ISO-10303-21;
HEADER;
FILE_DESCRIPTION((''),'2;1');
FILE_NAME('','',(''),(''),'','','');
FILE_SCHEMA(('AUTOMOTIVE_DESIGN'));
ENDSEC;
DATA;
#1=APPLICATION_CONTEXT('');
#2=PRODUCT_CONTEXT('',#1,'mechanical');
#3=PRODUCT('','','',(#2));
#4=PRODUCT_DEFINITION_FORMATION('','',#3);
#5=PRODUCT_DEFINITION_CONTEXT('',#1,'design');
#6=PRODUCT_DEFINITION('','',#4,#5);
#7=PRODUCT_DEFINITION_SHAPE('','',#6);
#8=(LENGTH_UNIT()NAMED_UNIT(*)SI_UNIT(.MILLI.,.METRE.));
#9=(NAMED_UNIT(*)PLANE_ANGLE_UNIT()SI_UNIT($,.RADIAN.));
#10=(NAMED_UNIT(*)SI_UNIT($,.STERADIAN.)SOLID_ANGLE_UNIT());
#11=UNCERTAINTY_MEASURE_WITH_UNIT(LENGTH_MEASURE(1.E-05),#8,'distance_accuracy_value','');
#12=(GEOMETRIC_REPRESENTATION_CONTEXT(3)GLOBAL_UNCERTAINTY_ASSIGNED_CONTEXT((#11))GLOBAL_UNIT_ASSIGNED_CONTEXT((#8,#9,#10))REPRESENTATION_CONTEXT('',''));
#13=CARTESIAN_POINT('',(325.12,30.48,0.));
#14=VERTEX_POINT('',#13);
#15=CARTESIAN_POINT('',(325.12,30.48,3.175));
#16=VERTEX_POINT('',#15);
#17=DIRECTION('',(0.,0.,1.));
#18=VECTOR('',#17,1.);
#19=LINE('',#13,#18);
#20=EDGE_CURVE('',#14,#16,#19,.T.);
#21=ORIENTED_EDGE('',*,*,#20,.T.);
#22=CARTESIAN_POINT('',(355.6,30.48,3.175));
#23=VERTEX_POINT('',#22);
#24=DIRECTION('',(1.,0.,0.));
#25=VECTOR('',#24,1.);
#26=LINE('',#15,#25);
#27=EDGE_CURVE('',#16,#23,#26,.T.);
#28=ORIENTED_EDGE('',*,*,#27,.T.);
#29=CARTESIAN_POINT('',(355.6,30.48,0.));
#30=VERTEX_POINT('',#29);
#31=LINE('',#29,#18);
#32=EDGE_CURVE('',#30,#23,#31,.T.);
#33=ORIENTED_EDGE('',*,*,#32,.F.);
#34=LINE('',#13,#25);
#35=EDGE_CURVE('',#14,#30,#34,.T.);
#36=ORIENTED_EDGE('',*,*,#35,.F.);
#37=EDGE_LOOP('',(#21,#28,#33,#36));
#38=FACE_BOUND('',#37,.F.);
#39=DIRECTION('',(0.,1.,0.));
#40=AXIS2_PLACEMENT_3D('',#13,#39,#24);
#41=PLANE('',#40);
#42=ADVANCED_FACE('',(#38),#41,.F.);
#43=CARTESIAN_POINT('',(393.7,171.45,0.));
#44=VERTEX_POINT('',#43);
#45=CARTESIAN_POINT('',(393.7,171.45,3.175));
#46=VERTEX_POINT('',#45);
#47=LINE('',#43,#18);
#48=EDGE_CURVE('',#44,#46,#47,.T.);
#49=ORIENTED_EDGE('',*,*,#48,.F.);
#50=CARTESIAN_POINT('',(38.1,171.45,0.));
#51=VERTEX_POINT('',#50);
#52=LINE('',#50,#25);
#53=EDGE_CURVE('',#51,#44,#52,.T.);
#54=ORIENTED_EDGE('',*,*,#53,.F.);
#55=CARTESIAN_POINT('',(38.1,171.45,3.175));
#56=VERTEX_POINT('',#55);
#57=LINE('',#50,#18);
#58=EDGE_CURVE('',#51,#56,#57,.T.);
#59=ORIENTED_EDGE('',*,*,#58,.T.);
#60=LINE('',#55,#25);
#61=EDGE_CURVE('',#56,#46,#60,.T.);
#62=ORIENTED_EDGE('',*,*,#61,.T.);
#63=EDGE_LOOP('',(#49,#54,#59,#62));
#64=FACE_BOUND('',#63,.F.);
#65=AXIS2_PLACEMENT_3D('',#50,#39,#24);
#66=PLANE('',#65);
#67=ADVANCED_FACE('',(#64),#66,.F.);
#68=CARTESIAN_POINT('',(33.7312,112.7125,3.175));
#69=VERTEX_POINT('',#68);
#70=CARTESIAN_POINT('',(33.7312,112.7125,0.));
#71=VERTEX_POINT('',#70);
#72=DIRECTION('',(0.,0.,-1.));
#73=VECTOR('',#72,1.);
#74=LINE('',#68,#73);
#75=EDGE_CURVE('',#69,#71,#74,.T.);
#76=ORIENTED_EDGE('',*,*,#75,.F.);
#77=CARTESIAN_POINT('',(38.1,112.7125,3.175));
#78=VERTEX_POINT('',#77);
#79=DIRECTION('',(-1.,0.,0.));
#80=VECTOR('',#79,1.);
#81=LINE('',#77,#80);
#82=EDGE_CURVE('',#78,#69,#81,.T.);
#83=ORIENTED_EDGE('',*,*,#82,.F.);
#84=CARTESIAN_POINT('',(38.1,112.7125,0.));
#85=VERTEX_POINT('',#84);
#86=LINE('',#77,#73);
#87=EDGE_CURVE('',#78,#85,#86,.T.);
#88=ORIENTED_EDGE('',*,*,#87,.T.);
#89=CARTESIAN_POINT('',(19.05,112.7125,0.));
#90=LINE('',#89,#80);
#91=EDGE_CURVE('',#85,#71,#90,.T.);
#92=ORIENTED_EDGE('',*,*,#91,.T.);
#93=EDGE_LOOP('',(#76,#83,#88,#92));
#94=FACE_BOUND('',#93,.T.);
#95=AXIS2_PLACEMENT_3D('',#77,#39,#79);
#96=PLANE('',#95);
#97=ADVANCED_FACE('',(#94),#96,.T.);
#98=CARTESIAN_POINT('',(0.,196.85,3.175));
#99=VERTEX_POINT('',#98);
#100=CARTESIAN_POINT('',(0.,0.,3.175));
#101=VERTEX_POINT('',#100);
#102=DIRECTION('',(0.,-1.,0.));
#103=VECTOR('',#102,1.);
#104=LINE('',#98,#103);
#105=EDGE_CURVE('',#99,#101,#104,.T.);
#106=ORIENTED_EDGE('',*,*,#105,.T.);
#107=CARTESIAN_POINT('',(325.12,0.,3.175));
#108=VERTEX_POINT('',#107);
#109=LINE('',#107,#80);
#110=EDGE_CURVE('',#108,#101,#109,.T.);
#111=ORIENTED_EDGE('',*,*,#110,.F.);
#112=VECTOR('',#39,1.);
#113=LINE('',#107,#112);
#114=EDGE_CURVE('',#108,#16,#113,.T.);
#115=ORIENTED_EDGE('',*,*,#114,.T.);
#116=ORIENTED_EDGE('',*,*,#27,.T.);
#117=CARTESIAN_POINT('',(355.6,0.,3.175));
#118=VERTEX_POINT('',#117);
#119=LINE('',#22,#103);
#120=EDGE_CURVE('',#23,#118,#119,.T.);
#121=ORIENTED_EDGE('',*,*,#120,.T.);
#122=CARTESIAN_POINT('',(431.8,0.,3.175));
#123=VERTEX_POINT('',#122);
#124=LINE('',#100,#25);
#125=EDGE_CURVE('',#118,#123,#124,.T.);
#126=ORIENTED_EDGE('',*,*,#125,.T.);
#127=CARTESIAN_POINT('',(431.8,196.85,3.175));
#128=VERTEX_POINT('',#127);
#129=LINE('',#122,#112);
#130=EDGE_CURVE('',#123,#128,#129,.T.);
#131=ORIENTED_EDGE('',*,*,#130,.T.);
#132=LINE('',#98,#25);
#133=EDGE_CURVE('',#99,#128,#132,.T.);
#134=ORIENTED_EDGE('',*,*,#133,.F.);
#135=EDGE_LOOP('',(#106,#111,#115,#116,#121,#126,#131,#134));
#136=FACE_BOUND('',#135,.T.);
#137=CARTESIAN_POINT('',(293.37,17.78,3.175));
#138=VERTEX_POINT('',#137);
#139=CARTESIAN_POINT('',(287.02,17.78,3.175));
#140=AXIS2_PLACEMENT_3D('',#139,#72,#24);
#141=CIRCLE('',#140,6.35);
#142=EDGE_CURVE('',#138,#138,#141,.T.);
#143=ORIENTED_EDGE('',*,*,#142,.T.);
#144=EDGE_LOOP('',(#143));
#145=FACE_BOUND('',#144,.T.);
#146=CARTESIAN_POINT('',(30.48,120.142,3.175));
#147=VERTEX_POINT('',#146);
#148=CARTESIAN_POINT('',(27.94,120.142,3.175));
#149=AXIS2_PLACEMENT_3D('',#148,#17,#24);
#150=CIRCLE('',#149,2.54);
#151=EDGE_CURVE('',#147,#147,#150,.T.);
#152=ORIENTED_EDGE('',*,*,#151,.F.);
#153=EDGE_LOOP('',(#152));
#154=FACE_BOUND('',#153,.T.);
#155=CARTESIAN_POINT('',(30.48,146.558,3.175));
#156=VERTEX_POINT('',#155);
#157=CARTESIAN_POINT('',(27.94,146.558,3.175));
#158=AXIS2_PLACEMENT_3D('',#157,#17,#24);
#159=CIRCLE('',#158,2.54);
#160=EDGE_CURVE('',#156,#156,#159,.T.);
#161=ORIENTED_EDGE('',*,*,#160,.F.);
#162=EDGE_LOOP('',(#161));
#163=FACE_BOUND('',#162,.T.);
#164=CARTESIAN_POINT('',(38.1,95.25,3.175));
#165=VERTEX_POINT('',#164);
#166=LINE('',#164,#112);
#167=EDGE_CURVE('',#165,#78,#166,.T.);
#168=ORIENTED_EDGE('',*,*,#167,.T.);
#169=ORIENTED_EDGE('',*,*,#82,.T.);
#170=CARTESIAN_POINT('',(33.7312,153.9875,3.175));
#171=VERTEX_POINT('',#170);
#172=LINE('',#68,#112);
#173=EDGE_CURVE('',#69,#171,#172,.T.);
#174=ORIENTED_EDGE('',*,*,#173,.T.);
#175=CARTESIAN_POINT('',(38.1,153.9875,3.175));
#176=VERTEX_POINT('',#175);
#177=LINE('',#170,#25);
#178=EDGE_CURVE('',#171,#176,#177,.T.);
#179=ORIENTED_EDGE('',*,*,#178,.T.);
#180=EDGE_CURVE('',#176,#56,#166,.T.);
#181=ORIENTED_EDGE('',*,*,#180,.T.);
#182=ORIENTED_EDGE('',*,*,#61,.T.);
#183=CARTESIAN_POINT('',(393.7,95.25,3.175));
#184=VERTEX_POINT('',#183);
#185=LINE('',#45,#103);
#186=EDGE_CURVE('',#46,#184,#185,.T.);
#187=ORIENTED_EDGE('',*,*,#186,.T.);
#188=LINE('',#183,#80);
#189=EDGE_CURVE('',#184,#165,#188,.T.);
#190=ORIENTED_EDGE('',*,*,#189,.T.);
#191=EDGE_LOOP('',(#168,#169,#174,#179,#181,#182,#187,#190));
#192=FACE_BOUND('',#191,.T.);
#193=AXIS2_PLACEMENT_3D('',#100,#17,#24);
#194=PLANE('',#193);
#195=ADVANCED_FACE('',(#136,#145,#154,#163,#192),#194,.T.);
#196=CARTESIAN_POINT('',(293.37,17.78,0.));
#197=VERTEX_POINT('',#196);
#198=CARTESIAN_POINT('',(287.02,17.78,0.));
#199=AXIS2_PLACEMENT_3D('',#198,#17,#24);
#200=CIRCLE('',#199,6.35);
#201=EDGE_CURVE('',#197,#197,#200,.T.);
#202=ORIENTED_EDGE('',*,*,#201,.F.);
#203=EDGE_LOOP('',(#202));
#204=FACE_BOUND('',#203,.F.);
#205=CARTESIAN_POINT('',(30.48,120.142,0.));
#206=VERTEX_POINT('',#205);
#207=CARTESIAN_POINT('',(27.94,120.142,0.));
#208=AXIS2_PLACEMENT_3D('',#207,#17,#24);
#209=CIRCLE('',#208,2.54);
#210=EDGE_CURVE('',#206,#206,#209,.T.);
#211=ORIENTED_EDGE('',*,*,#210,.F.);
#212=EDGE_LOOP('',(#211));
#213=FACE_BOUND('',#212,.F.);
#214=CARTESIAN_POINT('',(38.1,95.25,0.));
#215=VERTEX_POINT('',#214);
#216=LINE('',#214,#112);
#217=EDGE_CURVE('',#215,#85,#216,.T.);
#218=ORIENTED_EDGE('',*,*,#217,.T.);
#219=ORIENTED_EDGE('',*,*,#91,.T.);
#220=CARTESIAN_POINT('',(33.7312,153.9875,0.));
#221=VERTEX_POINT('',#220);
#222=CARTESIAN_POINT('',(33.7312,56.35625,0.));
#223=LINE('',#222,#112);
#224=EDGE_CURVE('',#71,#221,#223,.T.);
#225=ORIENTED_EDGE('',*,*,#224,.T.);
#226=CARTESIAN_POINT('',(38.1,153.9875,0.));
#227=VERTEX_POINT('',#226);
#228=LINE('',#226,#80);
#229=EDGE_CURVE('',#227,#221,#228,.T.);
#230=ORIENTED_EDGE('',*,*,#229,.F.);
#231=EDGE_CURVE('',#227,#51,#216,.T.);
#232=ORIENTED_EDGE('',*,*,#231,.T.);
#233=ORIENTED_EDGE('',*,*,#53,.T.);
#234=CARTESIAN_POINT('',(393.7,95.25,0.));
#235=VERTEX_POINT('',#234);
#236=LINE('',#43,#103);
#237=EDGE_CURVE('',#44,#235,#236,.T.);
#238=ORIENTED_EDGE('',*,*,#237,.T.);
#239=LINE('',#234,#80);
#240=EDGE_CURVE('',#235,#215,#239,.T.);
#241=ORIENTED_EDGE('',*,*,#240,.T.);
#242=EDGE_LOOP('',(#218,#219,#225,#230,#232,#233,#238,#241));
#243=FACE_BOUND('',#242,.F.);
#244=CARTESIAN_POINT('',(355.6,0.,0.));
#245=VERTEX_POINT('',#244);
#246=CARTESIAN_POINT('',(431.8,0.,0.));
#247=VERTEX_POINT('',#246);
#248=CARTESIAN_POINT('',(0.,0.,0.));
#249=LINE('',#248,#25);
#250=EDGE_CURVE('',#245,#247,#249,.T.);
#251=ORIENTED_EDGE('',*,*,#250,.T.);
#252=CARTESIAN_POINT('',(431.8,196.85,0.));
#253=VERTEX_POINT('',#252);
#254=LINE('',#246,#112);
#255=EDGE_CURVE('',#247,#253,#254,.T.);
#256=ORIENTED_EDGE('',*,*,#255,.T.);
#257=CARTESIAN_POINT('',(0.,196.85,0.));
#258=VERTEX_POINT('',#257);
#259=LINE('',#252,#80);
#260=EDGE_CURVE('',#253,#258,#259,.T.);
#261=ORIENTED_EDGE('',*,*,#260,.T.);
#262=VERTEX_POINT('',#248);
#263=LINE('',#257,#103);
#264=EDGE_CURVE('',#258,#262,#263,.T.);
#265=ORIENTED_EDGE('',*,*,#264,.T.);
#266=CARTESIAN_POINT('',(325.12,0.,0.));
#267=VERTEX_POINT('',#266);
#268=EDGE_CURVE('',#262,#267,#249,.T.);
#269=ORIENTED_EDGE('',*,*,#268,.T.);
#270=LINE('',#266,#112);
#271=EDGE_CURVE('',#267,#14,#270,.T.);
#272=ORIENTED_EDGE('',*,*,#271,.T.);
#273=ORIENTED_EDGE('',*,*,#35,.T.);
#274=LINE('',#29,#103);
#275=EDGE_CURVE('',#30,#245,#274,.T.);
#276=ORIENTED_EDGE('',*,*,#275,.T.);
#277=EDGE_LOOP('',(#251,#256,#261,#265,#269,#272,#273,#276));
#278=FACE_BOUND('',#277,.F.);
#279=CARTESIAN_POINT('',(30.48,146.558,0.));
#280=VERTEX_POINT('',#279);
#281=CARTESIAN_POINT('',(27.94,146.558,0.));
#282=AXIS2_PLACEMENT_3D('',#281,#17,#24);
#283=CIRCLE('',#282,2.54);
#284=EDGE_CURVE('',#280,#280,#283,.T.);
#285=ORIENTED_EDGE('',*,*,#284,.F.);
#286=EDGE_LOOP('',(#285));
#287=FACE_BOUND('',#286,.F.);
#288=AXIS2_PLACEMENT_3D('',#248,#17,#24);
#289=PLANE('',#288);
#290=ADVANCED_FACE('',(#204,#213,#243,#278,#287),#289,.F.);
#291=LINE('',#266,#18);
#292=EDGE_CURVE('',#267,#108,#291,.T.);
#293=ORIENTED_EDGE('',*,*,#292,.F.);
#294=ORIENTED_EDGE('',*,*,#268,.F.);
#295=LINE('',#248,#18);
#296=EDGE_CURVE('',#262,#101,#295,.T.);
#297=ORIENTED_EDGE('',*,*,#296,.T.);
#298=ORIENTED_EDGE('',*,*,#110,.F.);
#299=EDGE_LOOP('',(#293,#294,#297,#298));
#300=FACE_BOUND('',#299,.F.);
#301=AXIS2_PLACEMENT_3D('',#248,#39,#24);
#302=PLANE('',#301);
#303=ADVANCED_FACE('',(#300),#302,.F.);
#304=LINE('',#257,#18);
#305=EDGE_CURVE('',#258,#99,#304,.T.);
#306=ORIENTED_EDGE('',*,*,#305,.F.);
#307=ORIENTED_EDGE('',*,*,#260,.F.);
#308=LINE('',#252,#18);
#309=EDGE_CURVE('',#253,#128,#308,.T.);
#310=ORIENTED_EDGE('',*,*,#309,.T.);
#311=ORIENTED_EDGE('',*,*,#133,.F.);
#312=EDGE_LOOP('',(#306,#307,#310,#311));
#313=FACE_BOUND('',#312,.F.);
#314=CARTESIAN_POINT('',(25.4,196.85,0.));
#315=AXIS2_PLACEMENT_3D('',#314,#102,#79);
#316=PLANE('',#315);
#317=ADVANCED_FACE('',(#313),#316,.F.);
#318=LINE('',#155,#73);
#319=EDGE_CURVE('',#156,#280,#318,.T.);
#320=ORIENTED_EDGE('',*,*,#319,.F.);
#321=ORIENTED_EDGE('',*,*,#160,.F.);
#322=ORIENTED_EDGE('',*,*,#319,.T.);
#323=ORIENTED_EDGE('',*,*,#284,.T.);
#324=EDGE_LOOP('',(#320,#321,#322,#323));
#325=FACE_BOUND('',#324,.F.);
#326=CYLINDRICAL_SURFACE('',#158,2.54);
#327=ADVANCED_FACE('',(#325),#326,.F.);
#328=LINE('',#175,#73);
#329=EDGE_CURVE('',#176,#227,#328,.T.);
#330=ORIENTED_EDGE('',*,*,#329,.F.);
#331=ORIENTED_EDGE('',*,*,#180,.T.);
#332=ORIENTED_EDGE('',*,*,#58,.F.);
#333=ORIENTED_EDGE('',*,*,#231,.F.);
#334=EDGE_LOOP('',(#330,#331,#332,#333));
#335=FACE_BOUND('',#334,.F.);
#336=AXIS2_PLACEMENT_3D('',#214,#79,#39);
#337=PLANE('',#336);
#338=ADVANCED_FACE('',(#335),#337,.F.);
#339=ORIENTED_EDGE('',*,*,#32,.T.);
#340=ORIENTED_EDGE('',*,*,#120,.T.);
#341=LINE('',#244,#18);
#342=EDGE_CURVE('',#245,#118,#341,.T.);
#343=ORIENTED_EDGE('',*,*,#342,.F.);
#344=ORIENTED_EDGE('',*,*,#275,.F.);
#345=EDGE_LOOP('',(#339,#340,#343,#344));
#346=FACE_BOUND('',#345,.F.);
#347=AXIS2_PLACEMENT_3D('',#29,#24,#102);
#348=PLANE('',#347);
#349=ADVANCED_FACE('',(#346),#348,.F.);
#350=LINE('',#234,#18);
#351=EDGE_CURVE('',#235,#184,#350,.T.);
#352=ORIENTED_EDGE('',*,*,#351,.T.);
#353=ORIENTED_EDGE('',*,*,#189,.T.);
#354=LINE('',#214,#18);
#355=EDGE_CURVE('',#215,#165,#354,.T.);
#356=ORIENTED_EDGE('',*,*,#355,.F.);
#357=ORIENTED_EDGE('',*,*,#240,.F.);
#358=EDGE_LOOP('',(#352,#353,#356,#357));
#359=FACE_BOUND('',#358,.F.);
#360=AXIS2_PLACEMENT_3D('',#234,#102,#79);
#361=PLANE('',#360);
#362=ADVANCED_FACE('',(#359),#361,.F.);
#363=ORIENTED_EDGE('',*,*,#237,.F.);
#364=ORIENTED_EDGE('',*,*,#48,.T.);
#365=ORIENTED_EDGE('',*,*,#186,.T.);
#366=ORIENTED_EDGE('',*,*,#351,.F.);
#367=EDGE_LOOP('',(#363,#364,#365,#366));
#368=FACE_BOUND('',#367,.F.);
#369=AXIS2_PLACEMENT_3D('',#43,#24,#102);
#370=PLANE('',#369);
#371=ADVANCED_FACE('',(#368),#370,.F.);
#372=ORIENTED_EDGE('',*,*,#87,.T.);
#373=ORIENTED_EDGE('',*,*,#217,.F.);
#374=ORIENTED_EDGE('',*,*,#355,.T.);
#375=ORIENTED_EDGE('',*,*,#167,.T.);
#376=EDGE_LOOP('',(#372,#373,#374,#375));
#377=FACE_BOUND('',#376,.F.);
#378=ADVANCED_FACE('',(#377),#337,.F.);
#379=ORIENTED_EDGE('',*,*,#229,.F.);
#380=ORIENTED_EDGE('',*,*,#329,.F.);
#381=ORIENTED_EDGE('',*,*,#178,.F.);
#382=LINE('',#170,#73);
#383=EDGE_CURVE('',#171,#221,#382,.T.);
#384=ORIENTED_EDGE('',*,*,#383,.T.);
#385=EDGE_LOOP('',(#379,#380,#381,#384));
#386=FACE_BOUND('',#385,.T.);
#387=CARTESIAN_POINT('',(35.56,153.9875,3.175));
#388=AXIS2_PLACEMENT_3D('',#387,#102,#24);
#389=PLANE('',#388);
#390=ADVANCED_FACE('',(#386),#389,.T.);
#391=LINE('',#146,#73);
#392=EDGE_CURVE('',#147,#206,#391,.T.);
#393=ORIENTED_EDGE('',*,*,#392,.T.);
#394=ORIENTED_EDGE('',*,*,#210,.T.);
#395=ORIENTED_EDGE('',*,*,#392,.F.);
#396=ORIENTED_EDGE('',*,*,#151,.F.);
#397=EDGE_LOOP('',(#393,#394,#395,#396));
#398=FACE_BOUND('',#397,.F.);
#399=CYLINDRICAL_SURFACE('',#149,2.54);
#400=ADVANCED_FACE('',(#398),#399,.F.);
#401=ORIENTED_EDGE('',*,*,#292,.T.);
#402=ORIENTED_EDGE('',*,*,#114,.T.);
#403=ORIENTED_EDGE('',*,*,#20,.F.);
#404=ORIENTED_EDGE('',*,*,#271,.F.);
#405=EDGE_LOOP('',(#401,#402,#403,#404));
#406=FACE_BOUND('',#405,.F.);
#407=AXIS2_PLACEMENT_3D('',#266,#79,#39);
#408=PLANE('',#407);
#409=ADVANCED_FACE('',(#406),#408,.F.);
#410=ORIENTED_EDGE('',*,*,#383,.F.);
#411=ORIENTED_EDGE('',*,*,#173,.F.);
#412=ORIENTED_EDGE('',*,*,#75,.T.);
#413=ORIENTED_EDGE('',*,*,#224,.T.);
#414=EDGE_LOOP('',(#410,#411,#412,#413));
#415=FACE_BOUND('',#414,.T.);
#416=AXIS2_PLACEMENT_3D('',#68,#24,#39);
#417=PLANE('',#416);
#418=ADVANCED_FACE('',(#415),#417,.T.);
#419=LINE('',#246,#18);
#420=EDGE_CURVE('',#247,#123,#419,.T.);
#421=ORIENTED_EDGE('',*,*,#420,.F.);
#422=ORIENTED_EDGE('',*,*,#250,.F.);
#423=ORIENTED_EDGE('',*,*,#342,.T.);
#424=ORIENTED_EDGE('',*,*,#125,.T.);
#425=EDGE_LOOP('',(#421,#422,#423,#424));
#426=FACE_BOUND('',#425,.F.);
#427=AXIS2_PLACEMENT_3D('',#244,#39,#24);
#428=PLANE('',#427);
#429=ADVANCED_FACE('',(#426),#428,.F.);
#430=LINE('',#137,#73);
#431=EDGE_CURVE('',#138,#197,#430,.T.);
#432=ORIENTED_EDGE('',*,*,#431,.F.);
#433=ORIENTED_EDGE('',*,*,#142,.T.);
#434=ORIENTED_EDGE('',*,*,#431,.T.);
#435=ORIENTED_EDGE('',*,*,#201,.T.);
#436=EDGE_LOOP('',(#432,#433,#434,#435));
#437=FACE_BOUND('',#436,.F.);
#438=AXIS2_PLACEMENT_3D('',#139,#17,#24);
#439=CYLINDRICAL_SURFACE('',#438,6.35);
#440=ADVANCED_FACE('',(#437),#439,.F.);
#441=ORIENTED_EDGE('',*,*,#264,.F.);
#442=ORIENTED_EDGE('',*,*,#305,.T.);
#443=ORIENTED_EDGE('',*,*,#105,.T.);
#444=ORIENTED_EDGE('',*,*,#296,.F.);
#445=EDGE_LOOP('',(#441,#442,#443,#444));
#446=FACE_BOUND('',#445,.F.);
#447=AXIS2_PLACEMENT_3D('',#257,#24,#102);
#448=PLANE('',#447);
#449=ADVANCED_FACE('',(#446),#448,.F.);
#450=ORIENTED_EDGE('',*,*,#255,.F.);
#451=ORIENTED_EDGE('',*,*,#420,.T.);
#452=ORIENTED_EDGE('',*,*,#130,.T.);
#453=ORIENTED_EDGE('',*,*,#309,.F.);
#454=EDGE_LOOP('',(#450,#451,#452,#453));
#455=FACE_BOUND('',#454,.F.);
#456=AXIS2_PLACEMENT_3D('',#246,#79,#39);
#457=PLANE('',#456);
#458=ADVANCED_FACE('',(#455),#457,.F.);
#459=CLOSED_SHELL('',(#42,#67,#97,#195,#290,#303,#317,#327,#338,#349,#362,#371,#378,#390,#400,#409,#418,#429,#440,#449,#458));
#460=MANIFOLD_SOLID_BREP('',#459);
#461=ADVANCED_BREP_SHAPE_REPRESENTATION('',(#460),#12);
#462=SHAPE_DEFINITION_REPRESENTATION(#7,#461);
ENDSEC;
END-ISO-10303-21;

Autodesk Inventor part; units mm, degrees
ref_plane "YZ Plane" through (0, 0, 0) normal (1, 0, 0) x (0, 1, 0)
ref_plane "XZ Plane" through (0, 0, 0) normal (0, 1, 0) x (-1, 0, 0)
ref_plane "XY Plane" through (0, 0, 0) normal (0, 0, 1) x (1, 0, 0)
sketch "Sketch1" plane through (0, 0, 0) normal (0, 0, 1) x (1, 0, 0)
  line L0 (0, 0) -> (431.8, 0)
  line L1 (431.8, 0) -> (431.8, 196.85)
  line L2 (431.8, 196.85) -> (0, 196.85)
  line L3 (0, 196.85) -> (0, 0)
  line L4 (431.8, 0) -> (330.2, 0)
  line L5 (330.2, 0) -> (287.02, 0)
  line L6 (325.12, 0) -> (325.12, 30.48)
  line L7 (325.12, 30.48) -> (355.6, 30.48)
  line L8 (355.6, 30.48) -> (355.6, 0)
  line L9 (38.1, 171.45) -> (393.7, 171.45)
  line L10 (393.7, 171.45) -> (393.7, 95.25)
  line L11 (393.7, 95.25) -> (38.1, 95.25)
  line L12 (38.1, 95.25) -> (38.1, 171.45)
  line L13 (0, 196.85) -> (25.4, 196.85)
  line L14 (431.8, 196.85) -> (406.4, 196.85)
  line L15 (0, 196.85) -> (38.1, 196.85)
  line L16 (38.1, 196.85) -> (38.1, 171.45)
  line L17 (431.8, 0) -> (355.6, 0)
  line L18 (355.6, 0) -> (330.2, 0)
  line L19 (325.12, 0) -> (287.02, 0)
  point P0 (325.12, 0)
  dimension "d0" = 431.8
  dimension "d5" = 30.48
  dimension "d6" = 30.48
  dimension "d7" = 355.6
  dimension "d8" = 76.2
  dimension "d9" = 25.4
  dimension "d15" = 38.1
  dimension "d16" = 76.2
  dimension "d18" = 38.1
extrude "Extrusion1" add sketch "Sketch1" along normal blind 3.175 contours L3 L2 L1 L0 L8 L7 L6
sketch "Sketch2" plane through (0, 0, 3.175) normal (0, 0, 1) x (1, 0, 0)
  line L0 (0, 0) -> (325.12, 0) projected
  circle A0 centre (27.94, 120.142) radius 2.54
  circle A1 centre (27.94, 146.558) radius 2.54
  line L1 (38.1, 171.45) -> (393.7, 171.45) projected
  line L2 (38.1, 171.45) -> (38.1, 152.4)
  line L3 (38.1, 95.25) -> (38.1, 171.45) projected
  line L4 (38.1, 95.25) -> (38.1, 171.45) projected
  line L5 (38.1, 171.45) -> (38.1, 133.35)
  line L6 (287.02, 0) -> (287.02, 17.78)
  circle A2 centre (287.02, 17.78) radius 6.35
  dimension "d44" = 17.78
  dimension "d45" = 12.7
extrude "Extrusion2" cut sketch "Sketch2" against normal blind 25.4
sketch "Sketch4" plane through (0, 0, 3.175) normal (0, 0, 1) x (1, 0, 0)
  circle A0 centre (27.94, 146.558) radius 2.54 projected
  line L0 (27.94, 146.558) -> (27.94, 152.4)
  line L1 (27.94, 152.4) -> (38.1, 152.4)
  line L2 (38.1, 95.25) -> (38.1, 171.45) projected
  line L3 (38.1, 152.4) -> (38.1, 114.3)
  line L4 (38.1, 114.3) -> (27.94, 114.3)
  circle A1 centre (27.94, 120.142) radius 2.54 projected
  line L5 (27.94, 114.3) -> (27.94, 120.142)
  line L6 (38.1, 152.4) -> (35.56, 152.4)
  line L7 (35.56, 152.4) -> (35.56, 114.3)
  point P0 (0, 0)
  dimension "d30" = 5.842
  dimension "d31" = 38.1
  dimension "d32" = 2.54
extrude "Extrusion3" cut sketch "Sketch4" against normal blind 25.4 contours L1 L2 L4 L7
sketch "Sketch6" plane through (0, 0, 3.175) normal (0, 0, 1) x (1, 0, 0)
  line L0 (38.1, 152.4) -> (38.1, 171.45) projected
  line L1 (35.56, 153.9875) -> (38.1, 153.9875)
  line L2 (38.1, 153.9875) -> (38.1, 112.7125)
  line L3 (38.1, 112.7125) -> (33.7312, 112.7125)
  line L4 (33.7312, 112.7125) -> (33.7312, 153.9875)
  line L5 (33.7312, 153.9875) -> (35.56, 153.9875)
  point P0 (0, 0)
  dimension "d40" = 41.275
  dimension "d41" = 4.3688
extrude "Extrusion4" cut sketch "Sketch6" against normal blind 25.4
properties part number "220228 Back Piece"
